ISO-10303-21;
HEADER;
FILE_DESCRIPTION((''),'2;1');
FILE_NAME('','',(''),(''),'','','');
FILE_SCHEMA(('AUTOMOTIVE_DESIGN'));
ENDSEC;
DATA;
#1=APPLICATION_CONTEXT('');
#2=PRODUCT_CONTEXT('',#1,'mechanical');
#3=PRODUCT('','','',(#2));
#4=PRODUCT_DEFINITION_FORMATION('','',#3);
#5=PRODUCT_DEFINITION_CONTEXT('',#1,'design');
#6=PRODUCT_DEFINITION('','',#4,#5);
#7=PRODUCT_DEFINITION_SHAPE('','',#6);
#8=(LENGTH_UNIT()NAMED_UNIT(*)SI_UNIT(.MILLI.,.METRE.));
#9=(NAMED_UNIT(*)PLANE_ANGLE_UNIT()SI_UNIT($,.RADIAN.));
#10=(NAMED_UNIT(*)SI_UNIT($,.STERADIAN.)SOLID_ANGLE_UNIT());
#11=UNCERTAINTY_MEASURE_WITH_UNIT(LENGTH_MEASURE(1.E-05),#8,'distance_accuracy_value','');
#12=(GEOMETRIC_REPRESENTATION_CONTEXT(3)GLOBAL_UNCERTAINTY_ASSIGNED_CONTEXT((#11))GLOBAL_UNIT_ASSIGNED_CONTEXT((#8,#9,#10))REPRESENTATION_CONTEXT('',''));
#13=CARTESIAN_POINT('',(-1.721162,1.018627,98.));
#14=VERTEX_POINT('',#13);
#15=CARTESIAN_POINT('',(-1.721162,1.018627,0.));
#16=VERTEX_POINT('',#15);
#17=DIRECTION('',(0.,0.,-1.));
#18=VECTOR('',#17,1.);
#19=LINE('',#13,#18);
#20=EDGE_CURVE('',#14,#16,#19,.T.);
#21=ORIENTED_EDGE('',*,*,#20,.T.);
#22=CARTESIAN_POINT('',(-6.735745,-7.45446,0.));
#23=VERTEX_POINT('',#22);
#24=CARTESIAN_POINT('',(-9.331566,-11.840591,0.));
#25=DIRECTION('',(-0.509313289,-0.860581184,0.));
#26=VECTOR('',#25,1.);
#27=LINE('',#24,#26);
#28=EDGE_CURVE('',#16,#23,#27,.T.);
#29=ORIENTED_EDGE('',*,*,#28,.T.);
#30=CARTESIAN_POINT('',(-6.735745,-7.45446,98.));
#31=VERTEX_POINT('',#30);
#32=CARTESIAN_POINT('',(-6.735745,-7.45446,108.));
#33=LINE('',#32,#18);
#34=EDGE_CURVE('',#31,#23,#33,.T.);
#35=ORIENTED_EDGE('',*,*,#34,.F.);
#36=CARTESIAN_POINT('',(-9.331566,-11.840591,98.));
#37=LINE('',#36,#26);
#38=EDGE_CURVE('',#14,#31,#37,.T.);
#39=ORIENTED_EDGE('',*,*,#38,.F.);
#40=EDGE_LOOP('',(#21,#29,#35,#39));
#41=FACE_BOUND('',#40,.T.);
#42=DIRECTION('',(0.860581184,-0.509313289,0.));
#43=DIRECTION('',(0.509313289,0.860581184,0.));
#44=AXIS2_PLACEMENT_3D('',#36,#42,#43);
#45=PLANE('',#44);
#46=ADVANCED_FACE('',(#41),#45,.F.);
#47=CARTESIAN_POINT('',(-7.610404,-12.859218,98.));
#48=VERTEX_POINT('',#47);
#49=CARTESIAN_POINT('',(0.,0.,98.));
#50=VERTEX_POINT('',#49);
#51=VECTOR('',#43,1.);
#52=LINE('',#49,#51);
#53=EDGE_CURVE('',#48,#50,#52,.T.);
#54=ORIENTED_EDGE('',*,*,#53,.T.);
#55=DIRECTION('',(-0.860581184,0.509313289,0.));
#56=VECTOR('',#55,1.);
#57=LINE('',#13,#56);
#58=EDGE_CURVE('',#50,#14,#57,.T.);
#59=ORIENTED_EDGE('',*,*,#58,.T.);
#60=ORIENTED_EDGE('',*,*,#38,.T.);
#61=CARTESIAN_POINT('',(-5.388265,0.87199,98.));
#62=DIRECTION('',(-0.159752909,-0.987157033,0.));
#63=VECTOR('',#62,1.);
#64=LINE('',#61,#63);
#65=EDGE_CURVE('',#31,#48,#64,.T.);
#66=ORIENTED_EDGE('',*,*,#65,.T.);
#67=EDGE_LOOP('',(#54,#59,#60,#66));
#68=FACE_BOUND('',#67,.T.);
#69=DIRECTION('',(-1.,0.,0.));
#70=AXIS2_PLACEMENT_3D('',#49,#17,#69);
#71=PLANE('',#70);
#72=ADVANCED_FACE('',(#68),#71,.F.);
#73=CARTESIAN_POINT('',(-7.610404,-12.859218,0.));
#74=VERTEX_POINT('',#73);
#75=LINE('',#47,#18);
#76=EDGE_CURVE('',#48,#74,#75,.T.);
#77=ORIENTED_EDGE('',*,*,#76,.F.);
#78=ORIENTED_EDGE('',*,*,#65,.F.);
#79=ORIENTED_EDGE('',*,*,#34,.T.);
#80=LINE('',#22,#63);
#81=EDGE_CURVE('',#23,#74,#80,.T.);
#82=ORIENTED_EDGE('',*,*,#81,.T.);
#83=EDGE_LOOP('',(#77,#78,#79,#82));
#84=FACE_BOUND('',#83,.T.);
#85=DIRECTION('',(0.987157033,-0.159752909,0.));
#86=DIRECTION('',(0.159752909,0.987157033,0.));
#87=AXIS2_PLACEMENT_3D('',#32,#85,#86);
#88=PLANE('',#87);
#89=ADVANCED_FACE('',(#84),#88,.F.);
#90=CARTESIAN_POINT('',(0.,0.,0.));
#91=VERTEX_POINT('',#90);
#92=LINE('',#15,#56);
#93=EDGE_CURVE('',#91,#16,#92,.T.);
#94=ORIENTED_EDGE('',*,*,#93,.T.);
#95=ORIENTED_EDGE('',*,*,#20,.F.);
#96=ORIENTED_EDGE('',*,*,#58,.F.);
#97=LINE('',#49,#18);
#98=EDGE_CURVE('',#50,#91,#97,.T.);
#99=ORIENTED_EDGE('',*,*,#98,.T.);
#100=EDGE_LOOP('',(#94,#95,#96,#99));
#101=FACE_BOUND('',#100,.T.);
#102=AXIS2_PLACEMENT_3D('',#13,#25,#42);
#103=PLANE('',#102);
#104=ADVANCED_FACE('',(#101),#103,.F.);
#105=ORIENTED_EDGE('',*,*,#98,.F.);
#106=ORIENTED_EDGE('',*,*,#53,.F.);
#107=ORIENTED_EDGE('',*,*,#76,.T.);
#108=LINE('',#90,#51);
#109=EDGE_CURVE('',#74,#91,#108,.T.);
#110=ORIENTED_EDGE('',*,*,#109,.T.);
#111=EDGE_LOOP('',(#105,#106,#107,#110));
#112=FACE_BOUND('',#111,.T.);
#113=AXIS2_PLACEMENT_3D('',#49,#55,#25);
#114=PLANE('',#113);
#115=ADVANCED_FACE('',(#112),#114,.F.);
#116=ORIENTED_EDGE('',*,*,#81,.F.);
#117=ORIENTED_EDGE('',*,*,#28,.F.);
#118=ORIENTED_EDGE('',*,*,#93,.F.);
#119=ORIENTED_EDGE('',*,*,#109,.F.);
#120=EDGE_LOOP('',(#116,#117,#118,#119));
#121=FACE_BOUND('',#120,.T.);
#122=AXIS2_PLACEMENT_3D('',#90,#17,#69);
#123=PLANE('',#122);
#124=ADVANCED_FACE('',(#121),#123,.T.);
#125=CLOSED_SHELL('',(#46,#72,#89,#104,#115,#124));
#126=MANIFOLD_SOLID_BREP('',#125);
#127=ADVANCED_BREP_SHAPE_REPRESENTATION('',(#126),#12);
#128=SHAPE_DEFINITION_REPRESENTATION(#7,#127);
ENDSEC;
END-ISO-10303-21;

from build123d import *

# Parameters (mm, degrees)
RESSALTO_EXTRUS_O1_DEPTH = 98
CHANFRO1_SIZE            = 2
CORTE_EXTRUS_O1_DEPTH    = 108


with BuildPart() as part:
    # Esboço1 → Ressalto-extrusão1 (new body)
    with BuildSketch(Plane.XY):
        Polygon((0, 0), (-7.610404057, -12.859217835), (-9.331566424, -11.840591257), (-1.721162367, 1.018626578), align=None)
    extrude(amount=RESSALTO_EXTRUS_O1_DEPTH)

    # Chanfro1
    chanfro1_edges = [part.edges().sort_by_distance(p)[0] for p in [
        (-9.331566424, -11.840591257, 49),
    ]]
    chamfer(chanfro1_edges, length=CHANFRO1_SIZE - 0.0001)  # a hair under: the kernel refuses the full size

    # Esboço2 → Corte-extrusão1 (cut)
    with BuildSketch(Plane(origin=(0, 0, 0), x_dir=(-1, 0, 0), z_dir=(0, 0, -1))):
        Polygon((6.735745015, -7.454459757), (7.610404057, -12.859217835), (9.393966164, -10.156838796), align=None)
    extrude(amount=-CORTE_EXTRUS_O1_DEPTH, mode=Mode.SUBTRACT)


solid = part.part
